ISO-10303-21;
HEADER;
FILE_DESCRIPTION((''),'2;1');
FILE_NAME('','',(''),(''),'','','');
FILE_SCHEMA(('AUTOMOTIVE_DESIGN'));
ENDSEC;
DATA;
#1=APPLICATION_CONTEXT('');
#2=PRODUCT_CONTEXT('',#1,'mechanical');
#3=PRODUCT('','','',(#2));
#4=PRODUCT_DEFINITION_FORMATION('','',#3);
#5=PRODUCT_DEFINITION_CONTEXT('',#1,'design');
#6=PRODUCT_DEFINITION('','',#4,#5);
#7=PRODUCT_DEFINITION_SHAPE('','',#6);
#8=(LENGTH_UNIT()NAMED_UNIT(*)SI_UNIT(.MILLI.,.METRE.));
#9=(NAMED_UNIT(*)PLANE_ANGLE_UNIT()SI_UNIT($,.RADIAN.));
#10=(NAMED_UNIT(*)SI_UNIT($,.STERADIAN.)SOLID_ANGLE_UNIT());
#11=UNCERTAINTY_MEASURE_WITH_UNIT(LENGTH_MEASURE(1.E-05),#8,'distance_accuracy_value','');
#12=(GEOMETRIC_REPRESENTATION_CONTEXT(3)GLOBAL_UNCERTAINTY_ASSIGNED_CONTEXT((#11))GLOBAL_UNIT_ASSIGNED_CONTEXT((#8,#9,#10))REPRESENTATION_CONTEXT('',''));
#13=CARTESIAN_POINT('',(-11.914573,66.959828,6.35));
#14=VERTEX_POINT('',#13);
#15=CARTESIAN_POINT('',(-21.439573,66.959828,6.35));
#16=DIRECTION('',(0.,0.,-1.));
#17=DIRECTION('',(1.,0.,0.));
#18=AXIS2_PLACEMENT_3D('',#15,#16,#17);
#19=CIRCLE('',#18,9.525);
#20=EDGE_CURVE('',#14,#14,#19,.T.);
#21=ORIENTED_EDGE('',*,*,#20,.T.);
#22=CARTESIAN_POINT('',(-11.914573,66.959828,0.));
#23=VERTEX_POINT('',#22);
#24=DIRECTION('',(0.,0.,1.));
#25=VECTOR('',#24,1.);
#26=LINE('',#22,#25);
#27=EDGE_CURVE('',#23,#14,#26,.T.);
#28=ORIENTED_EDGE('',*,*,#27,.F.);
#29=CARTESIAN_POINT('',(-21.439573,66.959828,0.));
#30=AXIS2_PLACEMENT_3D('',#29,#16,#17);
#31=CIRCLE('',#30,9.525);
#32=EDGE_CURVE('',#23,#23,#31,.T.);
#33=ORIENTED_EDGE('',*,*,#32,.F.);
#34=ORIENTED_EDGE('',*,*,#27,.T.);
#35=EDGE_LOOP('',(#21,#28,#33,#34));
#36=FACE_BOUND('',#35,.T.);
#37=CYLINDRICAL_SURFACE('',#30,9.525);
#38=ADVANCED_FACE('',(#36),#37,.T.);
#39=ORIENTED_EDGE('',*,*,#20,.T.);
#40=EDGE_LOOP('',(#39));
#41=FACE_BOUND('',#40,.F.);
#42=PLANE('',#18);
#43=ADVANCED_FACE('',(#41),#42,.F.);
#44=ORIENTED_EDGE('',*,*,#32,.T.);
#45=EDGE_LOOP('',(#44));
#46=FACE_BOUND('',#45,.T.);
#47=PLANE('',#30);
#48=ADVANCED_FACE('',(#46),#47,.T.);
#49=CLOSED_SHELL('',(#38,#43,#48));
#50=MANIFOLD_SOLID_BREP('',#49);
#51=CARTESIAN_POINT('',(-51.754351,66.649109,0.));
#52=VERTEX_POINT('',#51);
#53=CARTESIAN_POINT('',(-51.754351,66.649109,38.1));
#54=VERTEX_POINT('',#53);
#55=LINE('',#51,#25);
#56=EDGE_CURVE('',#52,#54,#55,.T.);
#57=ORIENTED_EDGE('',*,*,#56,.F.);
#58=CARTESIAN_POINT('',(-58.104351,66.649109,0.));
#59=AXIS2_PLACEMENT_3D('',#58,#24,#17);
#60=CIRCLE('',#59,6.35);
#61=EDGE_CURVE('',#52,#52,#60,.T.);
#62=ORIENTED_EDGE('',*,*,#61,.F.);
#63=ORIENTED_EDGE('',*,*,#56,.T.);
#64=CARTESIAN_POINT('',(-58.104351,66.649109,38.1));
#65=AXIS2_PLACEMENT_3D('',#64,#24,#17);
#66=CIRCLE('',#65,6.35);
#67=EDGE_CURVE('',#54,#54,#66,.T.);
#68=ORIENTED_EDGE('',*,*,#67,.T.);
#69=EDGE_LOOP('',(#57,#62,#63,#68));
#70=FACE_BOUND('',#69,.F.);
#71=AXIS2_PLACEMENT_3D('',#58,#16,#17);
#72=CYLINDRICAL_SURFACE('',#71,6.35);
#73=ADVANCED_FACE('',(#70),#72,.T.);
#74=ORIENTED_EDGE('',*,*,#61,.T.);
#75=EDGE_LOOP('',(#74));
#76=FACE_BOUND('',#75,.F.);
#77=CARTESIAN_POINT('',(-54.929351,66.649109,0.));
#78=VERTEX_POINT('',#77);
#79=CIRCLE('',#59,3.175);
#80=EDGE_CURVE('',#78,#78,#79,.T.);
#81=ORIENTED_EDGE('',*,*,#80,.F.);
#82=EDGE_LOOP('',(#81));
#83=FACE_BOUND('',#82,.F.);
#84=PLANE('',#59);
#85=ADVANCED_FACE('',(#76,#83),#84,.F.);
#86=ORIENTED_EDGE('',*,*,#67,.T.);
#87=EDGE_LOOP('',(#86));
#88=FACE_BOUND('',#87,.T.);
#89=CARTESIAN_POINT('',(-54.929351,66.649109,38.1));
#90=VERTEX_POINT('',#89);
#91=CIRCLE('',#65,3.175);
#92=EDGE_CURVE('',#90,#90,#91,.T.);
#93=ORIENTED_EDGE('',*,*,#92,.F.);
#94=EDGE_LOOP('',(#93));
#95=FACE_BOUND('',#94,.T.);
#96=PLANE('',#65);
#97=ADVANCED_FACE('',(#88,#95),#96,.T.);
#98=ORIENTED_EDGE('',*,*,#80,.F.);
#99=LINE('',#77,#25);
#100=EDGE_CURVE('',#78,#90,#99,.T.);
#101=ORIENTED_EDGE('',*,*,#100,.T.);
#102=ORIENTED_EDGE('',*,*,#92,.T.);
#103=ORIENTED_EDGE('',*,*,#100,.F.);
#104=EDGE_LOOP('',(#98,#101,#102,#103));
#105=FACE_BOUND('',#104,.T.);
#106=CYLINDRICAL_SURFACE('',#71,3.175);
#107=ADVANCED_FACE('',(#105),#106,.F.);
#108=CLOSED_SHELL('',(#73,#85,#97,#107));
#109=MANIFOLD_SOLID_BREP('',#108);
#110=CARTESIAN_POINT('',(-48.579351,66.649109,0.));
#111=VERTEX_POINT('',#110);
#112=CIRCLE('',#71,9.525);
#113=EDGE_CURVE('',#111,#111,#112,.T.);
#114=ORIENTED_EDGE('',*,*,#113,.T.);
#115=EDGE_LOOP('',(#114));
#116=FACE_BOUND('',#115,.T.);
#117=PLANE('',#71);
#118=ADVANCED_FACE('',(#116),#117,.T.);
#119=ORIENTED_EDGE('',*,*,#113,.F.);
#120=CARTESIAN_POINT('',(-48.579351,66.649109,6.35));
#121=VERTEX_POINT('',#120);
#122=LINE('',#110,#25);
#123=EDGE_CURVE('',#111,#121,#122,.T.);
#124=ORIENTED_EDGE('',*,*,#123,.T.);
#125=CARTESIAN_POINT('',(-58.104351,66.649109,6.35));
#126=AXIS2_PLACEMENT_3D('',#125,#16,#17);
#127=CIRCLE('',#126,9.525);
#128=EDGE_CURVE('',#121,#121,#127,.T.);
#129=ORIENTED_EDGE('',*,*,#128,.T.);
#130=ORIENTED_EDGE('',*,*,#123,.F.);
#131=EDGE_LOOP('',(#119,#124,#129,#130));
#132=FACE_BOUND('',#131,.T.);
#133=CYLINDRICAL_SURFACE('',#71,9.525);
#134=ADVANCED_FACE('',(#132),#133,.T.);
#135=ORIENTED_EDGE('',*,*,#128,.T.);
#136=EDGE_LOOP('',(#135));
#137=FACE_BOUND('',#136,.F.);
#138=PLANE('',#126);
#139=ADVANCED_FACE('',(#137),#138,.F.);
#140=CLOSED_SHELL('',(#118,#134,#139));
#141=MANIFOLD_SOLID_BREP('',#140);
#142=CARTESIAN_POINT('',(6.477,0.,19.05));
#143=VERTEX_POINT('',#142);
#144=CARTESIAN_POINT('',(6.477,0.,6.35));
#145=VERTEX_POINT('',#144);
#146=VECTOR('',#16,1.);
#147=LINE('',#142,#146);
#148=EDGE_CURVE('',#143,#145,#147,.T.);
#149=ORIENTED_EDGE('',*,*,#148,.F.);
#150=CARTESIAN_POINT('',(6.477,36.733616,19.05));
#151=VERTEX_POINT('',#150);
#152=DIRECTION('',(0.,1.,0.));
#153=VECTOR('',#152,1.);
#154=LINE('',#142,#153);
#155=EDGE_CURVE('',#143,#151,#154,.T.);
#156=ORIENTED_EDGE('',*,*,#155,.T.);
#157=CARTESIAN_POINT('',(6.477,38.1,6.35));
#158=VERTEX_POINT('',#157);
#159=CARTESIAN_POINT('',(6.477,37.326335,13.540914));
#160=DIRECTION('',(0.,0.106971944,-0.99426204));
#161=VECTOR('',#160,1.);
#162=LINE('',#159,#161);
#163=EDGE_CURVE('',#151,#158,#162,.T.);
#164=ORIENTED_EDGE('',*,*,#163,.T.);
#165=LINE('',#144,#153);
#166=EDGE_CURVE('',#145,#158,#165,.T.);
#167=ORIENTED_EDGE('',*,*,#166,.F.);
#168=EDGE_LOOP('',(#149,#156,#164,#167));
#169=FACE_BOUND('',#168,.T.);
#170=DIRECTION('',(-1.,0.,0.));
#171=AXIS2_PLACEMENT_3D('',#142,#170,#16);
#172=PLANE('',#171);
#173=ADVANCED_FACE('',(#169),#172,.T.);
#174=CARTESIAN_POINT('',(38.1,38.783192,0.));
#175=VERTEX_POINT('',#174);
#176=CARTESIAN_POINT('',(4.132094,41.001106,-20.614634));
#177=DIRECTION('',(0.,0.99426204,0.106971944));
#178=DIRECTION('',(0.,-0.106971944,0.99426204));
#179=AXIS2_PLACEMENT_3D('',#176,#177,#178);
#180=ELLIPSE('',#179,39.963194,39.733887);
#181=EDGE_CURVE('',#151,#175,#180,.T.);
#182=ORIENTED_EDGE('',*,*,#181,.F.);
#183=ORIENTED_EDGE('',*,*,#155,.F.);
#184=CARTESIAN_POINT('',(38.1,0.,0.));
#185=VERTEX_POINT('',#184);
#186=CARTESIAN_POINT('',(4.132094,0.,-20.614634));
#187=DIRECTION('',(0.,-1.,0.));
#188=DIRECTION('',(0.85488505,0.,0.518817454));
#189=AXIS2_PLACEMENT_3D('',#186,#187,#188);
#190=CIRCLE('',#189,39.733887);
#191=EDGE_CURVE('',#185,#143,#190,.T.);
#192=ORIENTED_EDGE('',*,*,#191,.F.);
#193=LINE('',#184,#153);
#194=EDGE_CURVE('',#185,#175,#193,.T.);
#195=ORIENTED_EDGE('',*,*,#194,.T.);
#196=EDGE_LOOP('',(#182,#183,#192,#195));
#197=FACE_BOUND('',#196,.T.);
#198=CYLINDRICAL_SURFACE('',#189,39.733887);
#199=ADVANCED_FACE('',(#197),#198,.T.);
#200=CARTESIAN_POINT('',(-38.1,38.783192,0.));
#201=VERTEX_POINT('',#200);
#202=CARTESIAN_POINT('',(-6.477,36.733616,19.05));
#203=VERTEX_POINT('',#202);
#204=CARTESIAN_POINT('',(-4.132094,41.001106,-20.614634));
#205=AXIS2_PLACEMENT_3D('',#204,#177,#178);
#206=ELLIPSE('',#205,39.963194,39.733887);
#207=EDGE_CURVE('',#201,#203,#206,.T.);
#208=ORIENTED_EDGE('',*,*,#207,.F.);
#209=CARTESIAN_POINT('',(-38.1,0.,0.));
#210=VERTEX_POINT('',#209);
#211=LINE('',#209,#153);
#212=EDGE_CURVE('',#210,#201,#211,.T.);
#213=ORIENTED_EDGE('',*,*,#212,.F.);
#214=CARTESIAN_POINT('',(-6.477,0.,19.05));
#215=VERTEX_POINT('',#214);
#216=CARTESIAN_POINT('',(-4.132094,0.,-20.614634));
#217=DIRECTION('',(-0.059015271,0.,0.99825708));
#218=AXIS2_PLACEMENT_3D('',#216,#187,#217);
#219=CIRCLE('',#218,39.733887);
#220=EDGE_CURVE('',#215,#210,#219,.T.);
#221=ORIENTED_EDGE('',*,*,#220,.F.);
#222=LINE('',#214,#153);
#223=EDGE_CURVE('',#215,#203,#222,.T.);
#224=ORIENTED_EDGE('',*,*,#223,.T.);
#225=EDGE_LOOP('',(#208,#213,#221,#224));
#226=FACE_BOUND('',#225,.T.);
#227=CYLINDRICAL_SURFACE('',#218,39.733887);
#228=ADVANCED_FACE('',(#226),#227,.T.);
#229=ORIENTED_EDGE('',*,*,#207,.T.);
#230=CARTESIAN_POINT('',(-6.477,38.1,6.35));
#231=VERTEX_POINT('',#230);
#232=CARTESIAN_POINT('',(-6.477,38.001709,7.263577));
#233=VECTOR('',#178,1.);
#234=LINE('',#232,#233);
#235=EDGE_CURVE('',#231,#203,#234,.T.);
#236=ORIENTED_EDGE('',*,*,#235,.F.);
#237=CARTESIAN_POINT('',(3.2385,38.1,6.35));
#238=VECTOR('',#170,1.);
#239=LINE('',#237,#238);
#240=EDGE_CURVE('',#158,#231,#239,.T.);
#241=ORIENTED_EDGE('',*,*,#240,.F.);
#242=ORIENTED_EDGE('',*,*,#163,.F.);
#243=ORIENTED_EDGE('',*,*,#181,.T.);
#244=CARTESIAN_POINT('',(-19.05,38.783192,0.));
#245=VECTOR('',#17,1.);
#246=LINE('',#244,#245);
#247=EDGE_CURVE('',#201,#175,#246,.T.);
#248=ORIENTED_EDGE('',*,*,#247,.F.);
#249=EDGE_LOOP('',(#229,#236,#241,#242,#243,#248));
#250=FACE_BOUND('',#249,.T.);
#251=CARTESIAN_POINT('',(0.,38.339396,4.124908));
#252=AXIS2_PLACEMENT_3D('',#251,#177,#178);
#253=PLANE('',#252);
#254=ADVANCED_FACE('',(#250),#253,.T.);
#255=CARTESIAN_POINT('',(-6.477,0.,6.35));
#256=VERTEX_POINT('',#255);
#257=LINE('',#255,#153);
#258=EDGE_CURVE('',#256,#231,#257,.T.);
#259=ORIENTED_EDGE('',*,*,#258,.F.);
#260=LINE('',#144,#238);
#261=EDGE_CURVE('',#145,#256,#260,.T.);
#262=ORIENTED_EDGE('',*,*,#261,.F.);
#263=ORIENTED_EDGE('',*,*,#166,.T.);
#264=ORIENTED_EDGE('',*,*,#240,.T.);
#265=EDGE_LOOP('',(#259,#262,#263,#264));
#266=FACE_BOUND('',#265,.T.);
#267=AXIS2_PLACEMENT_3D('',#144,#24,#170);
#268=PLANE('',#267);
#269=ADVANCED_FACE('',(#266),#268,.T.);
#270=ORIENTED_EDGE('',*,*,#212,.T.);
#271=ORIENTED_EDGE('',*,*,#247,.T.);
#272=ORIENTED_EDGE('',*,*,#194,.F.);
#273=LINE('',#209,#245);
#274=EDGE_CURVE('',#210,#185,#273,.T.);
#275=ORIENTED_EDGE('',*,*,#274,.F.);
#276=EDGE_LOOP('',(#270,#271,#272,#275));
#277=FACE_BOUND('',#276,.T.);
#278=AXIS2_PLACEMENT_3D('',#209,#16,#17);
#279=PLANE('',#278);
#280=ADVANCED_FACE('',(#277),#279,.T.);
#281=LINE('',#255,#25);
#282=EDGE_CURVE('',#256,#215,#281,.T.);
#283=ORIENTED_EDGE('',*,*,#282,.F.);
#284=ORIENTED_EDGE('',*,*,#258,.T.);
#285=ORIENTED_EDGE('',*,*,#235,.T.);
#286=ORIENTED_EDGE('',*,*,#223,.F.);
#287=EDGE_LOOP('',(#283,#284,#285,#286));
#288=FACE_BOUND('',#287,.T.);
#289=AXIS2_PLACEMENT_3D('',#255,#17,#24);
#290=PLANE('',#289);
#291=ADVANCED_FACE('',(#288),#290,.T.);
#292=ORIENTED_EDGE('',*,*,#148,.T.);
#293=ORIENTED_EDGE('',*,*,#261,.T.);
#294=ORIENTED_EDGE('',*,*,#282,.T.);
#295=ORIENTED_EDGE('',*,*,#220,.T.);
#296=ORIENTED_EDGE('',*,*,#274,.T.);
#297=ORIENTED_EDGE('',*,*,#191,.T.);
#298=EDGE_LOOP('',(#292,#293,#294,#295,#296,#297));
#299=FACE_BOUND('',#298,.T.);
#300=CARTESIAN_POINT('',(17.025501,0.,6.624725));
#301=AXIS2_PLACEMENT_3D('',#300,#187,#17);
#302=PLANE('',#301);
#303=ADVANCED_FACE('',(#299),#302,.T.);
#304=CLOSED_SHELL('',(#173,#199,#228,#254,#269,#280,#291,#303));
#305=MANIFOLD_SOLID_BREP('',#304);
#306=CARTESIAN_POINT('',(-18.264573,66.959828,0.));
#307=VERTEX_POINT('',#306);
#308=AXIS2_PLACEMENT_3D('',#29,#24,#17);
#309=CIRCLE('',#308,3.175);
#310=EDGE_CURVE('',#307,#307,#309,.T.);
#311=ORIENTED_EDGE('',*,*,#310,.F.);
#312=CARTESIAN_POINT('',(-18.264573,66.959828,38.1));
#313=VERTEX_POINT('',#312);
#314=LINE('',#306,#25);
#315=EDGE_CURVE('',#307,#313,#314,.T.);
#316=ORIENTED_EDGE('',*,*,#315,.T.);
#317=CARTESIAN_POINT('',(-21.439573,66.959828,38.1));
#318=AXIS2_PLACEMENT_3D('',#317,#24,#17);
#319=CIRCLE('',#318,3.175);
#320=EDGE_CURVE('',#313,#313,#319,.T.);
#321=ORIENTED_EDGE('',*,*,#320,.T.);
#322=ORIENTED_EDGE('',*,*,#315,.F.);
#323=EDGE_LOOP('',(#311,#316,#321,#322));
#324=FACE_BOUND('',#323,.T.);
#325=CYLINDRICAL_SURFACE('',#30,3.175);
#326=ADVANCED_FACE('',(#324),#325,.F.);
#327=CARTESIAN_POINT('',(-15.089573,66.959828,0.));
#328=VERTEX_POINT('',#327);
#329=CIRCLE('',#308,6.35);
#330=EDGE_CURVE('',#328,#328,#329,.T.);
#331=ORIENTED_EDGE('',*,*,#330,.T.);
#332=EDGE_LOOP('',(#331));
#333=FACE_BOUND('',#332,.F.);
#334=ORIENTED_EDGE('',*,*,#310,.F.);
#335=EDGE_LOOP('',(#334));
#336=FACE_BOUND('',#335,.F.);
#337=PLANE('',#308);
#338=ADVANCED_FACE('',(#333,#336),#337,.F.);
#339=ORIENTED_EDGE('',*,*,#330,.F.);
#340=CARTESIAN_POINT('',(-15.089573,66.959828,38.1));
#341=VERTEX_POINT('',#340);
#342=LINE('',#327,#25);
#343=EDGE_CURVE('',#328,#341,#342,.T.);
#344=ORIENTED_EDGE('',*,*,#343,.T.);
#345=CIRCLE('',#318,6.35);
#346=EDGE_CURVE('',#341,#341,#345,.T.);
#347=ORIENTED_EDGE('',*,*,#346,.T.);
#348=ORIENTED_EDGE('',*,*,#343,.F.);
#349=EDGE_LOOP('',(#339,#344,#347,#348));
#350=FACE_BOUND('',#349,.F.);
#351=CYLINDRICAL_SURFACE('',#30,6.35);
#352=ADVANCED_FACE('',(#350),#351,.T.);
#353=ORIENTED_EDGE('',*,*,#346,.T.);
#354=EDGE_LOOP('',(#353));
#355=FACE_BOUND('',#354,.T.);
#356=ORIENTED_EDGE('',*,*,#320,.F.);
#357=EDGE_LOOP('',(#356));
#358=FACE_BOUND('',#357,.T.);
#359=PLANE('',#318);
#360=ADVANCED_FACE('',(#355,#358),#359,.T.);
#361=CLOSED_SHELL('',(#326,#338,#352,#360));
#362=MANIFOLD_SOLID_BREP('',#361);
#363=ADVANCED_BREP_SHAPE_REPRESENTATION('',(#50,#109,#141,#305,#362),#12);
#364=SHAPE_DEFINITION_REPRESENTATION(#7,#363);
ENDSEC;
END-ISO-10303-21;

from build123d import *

# Parameters (mm, degrees)
F3_REACH = 81.3802869415
F4_R     = 6.35
F4_R_2   = 3.175
F5_DEPTH = 38.1
F6_R     = 9.525
F7_DEPTH = 6.35


with BuildPart() as f3:
    f3_end = Plane(origin=(0, 38.339396032, 4.1249082693), x_dir=(0, -0.1069719436, 0.9942620395), z_dir=(0, 0.9942620395, 0.1069719436))
    # F1 (on Front) → F3 (new body, up to a plane its end follows)
    with BuildSketch(Plane.XZ):
        with BuildLine():
            Line((0, 6.35), (0, 0))
            Line((0, 0), (38.1, 0))
            ThreePointArc((38.1, 0), (24.6352816359, 13.4206575155), (6.477, 19.05))
            Line((6.477, 19.05), (6.477, 6.35))
            Line((6.477, 6.35), (0, 6.35))
        make_face()
        with BuildLine():
            Line((-38.1, 0), (0, 0))
            Line((0, 0), (0, 6.35))
            Line((0, 6.35), (-6.477, 6.35))
            Line((-6.477, 6.35), (-6.477, 19.05))
            ThreePointArc((-6.477, 19.05), (-24.6352816359, 13.4206575155), (-38.1, 0))
        make_face()
    f3_long = extrude(amount=-F3_REACH, mode=Mode.PRIVATE)
    add(split(f3_long, bisect_by=f3_end, keep=Keep.BOTTOM, mode=Mode.PRIVATE))


with BuildPart() as f5:
    # F4 (on Top) → F5 (new body)
    with BuildSketch(Plane.XY):
        with Locations((-58.1043511629, 66.6491091251)):
            Circle(F4_R)
        with Locations((-58.1043511629, 66.6491091251)):
            Circle(F4_R_2, mode=Mode.SUBTRACT)
    extrude(amount=F5_DEPTH)


with BuildPart() as f5b:
    # F4 (on Top) → F5, piece 2 (new body)
    with BuildSketch(Plane.XY):
        with Locations((-21.4395727962, 66.9598281384)):
            Circle(F4_R)
        with Locations((-21.4395727962, 66.9598281384)):
            Circle(F4_R_2, mode=Mode.SUBTRACT)
    extrude(amount=F5_DEPTH)


with BuildPart() as f7:
    # F6 (on face) → F7 (new body)
    with BuildSketch(Plane(origin=(0, 0, 0), x_dir=(1, 0, 0), z_dir=(0, 0, -1))):
        with Locations((-58.1043511629, -66.6491091251)):
            Circle(F6_R)
    extrude(amount=-F7_DEPTH)


with BuildPart() as f7b:
    # F6 (on face) → F7, piece 2 (new body)
    with BuildSketch(Plane(origin=(0, 0, 0), x_dir=(1, 0, 0), z_dir=(0, 0, -1))):
        with Locations((-21.4395727962, -66.9598281384)):
            Circle(F6_R)
    extrude(amount=-F7_DEPTH)


solid = Compound([f3.part, f5.part, f5b.part, f7.part, f7b.part])
